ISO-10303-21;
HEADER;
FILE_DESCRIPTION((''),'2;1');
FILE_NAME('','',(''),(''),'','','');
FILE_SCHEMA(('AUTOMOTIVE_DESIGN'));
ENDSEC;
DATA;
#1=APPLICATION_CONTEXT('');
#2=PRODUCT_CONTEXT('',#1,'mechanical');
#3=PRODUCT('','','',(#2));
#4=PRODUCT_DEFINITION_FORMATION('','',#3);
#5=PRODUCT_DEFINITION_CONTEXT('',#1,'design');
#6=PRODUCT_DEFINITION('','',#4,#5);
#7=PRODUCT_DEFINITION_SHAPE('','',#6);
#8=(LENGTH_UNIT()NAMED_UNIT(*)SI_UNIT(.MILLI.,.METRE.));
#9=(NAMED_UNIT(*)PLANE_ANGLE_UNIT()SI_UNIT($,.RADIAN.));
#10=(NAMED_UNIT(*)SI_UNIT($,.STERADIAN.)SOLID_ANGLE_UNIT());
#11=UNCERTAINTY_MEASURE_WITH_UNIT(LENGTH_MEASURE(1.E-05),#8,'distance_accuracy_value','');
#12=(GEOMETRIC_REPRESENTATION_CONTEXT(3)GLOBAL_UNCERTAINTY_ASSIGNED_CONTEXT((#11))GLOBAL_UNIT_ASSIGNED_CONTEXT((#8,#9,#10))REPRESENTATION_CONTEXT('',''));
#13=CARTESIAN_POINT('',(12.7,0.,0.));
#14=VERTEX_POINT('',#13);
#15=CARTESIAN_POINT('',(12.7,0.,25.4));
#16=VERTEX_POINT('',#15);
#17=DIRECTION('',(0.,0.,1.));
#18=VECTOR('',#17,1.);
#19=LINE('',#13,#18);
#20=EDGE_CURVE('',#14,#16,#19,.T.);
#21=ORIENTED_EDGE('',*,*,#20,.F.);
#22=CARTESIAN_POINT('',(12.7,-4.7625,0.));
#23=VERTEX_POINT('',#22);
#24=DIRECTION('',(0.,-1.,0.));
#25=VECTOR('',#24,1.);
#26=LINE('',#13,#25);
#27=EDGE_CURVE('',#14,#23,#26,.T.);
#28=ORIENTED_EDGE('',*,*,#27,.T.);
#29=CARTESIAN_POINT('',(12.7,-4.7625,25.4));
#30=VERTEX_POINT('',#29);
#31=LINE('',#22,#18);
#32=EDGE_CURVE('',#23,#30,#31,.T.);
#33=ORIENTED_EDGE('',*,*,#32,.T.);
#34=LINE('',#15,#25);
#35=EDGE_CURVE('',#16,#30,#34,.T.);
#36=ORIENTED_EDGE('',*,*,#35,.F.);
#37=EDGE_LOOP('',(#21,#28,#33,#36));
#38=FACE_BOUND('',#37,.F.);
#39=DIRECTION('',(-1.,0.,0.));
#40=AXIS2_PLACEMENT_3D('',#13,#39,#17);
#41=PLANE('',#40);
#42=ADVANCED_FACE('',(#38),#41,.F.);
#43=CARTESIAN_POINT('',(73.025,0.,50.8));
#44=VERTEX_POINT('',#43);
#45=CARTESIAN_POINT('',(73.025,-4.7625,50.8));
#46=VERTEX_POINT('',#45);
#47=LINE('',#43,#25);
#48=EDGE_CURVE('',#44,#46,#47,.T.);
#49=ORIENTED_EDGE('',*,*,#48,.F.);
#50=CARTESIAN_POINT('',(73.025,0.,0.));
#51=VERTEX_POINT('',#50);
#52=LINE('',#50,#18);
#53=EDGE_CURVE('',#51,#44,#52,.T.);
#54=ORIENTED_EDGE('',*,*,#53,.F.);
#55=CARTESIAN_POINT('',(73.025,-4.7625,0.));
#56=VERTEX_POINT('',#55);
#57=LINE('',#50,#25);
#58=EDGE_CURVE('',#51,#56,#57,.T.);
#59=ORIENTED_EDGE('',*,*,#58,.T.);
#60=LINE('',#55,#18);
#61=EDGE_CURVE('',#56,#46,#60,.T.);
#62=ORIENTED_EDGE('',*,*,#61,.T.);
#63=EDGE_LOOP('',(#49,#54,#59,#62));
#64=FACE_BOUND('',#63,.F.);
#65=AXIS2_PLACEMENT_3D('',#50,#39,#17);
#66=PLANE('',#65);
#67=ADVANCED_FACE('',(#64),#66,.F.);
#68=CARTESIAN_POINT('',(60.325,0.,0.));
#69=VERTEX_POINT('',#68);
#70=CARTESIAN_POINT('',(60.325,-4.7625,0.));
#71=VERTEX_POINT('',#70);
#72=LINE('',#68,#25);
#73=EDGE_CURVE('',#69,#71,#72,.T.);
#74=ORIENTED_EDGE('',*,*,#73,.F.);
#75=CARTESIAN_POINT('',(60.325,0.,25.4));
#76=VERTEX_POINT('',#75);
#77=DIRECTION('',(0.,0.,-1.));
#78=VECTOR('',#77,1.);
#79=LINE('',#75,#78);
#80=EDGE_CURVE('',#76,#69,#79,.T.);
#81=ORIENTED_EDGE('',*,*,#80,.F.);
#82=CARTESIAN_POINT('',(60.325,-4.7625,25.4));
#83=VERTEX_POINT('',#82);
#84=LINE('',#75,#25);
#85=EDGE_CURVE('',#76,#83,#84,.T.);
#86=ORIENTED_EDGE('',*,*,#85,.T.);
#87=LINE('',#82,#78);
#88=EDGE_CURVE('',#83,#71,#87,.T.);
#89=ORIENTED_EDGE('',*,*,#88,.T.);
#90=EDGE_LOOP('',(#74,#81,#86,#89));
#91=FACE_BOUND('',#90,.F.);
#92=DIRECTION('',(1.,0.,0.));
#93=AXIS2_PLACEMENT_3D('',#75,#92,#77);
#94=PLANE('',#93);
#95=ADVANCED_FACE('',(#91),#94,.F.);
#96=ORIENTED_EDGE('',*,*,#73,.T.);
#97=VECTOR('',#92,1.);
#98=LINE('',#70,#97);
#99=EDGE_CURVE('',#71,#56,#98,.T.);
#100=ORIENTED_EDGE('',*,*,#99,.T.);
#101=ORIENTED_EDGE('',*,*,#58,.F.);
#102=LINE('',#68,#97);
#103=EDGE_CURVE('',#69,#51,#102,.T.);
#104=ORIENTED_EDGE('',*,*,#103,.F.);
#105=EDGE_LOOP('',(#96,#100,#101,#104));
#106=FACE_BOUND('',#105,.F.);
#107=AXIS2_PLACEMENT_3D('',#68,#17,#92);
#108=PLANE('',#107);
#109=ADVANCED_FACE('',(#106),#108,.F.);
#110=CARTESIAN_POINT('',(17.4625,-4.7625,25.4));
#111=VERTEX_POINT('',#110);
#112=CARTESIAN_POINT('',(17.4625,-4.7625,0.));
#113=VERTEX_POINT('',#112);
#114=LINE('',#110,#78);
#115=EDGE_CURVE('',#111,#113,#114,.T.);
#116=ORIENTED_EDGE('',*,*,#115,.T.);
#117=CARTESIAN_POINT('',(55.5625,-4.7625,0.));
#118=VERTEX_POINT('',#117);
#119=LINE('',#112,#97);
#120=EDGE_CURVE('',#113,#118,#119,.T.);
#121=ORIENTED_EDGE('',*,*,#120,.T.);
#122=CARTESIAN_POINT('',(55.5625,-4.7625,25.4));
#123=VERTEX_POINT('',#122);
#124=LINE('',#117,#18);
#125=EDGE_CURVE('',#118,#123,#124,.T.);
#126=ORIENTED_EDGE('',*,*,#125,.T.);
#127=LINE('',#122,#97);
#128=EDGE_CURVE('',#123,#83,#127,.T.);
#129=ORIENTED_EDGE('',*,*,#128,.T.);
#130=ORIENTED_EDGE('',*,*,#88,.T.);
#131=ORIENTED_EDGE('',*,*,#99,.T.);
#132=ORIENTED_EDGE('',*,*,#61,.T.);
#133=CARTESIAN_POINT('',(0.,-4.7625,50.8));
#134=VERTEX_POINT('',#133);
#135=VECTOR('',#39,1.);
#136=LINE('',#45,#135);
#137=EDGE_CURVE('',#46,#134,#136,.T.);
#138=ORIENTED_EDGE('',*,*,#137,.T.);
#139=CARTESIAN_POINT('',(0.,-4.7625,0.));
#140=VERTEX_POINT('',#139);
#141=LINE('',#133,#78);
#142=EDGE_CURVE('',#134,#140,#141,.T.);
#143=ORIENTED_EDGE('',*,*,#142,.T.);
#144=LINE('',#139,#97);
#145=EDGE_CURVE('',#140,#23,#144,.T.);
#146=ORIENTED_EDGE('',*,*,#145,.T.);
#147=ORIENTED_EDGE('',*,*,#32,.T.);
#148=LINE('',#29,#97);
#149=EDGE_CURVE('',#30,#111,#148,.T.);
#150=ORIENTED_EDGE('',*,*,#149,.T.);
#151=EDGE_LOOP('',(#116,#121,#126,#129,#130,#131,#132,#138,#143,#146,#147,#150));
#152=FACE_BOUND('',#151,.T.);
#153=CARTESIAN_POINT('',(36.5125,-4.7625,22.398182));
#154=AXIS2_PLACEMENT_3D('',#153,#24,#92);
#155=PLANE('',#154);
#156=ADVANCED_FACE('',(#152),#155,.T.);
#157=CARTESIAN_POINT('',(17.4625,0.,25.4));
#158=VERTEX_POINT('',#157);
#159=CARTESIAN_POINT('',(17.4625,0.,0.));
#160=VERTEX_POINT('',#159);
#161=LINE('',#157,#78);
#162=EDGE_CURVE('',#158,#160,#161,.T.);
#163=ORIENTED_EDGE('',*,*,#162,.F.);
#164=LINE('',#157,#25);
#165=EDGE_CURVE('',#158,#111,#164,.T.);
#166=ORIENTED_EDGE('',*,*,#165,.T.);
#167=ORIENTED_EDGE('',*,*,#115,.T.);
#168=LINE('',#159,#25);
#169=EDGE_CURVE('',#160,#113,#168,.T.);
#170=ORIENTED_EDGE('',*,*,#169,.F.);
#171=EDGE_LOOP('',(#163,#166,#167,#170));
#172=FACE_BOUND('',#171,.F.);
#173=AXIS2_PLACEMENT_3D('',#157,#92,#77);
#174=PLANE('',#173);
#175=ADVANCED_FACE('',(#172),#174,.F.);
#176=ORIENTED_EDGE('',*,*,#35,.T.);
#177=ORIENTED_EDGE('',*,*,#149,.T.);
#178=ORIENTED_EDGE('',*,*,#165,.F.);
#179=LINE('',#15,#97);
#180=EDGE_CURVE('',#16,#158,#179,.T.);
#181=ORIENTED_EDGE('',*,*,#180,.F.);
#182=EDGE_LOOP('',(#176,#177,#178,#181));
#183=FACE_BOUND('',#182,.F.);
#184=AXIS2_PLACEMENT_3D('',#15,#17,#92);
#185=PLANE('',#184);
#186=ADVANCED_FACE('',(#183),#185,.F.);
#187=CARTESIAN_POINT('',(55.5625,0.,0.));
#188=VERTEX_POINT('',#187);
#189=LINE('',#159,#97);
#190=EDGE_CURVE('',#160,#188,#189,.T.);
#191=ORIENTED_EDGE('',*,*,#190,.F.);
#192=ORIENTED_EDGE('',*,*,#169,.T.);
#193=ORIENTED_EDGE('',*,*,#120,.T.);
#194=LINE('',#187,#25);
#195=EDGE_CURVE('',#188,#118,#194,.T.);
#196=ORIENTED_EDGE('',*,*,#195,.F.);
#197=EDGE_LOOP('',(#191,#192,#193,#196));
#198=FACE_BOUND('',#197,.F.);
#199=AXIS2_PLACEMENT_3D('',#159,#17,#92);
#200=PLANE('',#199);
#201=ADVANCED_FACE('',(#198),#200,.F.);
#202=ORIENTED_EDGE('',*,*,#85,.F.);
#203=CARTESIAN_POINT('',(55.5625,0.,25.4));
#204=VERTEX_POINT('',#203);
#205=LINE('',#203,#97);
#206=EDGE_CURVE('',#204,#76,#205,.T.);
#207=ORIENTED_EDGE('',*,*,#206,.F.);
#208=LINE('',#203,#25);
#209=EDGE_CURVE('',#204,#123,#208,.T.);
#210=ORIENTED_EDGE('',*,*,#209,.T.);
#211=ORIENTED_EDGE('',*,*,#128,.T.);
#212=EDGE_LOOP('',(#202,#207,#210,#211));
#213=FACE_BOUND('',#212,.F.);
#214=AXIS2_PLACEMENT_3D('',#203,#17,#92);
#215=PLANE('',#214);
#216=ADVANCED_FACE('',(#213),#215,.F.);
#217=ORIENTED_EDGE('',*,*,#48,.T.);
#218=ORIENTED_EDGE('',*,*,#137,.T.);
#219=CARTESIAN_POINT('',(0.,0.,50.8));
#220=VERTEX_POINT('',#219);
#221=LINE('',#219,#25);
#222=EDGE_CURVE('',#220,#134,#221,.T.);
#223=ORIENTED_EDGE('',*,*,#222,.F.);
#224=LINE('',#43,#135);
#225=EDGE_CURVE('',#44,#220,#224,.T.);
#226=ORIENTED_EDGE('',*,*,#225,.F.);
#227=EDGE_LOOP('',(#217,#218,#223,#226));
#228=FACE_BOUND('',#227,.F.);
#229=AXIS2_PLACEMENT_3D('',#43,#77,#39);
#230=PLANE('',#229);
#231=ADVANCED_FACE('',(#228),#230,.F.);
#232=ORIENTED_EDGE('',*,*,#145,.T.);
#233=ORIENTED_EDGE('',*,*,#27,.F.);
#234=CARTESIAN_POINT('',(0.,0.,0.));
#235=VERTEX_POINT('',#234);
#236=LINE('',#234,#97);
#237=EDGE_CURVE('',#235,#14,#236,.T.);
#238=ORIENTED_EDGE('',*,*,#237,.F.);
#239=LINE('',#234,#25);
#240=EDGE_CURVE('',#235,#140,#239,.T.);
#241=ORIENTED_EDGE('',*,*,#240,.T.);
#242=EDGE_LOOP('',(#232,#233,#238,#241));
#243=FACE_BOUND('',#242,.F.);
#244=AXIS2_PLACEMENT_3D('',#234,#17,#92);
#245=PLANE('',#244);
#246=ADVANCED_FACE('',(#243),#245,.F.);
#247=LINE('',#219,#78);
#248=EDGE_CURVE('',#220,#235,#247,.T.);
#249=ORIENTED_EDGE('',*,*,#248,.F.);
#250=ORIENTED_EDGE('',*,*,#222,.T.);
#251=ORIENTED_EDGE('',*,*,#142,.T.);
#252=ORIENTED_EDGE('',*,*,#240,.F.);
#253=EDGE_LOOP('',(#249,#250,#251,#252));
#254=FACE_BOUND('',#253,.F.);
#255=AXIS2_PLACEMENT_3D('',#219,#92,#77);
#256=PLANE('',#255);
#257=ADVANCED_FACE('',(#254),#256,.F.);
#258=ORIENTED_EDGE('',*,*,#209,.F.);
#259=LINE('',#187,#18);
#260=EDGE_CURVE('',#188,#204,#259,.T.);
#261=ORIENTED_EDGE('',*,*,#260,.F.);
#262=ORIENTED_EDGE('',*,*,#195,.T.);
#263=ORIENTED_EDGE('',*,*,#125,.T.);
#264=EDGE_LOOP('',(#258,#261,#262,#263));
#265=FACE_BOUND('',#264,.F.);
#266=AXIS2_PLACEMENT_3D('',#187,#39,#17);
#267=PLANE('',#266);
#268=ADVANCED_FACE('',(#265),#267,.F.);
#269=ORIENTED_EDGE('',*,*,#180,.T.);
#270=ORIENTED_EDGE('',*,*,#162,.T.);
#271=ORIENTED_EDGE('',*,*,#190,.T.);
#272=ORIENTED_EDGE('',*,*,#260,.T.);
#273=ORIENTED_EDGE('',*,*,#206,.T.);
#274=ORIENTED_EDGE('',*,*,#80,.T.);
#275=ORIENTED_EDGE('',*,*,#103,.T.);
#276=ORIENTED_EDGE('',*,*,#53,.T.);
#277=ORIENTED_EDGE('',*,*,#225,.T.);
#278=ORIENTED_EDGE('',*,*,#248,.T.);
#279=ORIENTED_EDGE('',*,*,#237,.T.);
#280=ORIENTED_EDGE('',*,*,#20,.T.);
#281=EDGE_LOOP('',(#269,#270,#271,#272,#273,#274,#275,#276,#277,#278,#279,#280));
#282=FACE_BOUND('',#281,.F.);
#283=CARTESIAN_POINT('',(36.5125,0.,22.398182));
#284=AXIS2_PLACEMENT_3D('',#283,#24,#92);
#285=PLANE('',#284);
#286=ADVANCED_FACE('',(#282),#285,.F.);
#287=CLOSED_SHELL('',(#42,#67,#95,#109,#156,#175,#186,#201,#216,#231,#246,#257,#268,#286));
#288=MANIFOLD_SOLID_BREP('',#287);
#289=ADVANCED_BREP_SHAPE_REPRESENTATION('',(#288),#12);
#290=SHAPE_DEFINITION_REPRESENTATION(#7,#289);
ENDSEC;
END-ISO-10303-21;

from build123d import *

# Parameters (mm, degrees)
F1_DEPTH = 4.7625


# Not quite as in the source:
# - a length typed as a fraction of an inch, garbled in the dataset ("3 / 203.2 mm" for 3/8 in), is restored


with BuildPart() as f1:
    # F0 (on Front) → F1 (new body)
    with BuildSketch(Plane.XZ):
        Polygon((0, 50.8), (0, 0), (12.7, 0), (12.7, 25.4), (17.4625, 25.4), (17.4625, 0), (55.5625, 0), (55.5625, 25.4), (60.325, 25.4), (60.325, 0), (73.025, 0), (73.025, 50.8), align=None)
    extrude(amount=F1_DEPTH)


solid = f1.part
